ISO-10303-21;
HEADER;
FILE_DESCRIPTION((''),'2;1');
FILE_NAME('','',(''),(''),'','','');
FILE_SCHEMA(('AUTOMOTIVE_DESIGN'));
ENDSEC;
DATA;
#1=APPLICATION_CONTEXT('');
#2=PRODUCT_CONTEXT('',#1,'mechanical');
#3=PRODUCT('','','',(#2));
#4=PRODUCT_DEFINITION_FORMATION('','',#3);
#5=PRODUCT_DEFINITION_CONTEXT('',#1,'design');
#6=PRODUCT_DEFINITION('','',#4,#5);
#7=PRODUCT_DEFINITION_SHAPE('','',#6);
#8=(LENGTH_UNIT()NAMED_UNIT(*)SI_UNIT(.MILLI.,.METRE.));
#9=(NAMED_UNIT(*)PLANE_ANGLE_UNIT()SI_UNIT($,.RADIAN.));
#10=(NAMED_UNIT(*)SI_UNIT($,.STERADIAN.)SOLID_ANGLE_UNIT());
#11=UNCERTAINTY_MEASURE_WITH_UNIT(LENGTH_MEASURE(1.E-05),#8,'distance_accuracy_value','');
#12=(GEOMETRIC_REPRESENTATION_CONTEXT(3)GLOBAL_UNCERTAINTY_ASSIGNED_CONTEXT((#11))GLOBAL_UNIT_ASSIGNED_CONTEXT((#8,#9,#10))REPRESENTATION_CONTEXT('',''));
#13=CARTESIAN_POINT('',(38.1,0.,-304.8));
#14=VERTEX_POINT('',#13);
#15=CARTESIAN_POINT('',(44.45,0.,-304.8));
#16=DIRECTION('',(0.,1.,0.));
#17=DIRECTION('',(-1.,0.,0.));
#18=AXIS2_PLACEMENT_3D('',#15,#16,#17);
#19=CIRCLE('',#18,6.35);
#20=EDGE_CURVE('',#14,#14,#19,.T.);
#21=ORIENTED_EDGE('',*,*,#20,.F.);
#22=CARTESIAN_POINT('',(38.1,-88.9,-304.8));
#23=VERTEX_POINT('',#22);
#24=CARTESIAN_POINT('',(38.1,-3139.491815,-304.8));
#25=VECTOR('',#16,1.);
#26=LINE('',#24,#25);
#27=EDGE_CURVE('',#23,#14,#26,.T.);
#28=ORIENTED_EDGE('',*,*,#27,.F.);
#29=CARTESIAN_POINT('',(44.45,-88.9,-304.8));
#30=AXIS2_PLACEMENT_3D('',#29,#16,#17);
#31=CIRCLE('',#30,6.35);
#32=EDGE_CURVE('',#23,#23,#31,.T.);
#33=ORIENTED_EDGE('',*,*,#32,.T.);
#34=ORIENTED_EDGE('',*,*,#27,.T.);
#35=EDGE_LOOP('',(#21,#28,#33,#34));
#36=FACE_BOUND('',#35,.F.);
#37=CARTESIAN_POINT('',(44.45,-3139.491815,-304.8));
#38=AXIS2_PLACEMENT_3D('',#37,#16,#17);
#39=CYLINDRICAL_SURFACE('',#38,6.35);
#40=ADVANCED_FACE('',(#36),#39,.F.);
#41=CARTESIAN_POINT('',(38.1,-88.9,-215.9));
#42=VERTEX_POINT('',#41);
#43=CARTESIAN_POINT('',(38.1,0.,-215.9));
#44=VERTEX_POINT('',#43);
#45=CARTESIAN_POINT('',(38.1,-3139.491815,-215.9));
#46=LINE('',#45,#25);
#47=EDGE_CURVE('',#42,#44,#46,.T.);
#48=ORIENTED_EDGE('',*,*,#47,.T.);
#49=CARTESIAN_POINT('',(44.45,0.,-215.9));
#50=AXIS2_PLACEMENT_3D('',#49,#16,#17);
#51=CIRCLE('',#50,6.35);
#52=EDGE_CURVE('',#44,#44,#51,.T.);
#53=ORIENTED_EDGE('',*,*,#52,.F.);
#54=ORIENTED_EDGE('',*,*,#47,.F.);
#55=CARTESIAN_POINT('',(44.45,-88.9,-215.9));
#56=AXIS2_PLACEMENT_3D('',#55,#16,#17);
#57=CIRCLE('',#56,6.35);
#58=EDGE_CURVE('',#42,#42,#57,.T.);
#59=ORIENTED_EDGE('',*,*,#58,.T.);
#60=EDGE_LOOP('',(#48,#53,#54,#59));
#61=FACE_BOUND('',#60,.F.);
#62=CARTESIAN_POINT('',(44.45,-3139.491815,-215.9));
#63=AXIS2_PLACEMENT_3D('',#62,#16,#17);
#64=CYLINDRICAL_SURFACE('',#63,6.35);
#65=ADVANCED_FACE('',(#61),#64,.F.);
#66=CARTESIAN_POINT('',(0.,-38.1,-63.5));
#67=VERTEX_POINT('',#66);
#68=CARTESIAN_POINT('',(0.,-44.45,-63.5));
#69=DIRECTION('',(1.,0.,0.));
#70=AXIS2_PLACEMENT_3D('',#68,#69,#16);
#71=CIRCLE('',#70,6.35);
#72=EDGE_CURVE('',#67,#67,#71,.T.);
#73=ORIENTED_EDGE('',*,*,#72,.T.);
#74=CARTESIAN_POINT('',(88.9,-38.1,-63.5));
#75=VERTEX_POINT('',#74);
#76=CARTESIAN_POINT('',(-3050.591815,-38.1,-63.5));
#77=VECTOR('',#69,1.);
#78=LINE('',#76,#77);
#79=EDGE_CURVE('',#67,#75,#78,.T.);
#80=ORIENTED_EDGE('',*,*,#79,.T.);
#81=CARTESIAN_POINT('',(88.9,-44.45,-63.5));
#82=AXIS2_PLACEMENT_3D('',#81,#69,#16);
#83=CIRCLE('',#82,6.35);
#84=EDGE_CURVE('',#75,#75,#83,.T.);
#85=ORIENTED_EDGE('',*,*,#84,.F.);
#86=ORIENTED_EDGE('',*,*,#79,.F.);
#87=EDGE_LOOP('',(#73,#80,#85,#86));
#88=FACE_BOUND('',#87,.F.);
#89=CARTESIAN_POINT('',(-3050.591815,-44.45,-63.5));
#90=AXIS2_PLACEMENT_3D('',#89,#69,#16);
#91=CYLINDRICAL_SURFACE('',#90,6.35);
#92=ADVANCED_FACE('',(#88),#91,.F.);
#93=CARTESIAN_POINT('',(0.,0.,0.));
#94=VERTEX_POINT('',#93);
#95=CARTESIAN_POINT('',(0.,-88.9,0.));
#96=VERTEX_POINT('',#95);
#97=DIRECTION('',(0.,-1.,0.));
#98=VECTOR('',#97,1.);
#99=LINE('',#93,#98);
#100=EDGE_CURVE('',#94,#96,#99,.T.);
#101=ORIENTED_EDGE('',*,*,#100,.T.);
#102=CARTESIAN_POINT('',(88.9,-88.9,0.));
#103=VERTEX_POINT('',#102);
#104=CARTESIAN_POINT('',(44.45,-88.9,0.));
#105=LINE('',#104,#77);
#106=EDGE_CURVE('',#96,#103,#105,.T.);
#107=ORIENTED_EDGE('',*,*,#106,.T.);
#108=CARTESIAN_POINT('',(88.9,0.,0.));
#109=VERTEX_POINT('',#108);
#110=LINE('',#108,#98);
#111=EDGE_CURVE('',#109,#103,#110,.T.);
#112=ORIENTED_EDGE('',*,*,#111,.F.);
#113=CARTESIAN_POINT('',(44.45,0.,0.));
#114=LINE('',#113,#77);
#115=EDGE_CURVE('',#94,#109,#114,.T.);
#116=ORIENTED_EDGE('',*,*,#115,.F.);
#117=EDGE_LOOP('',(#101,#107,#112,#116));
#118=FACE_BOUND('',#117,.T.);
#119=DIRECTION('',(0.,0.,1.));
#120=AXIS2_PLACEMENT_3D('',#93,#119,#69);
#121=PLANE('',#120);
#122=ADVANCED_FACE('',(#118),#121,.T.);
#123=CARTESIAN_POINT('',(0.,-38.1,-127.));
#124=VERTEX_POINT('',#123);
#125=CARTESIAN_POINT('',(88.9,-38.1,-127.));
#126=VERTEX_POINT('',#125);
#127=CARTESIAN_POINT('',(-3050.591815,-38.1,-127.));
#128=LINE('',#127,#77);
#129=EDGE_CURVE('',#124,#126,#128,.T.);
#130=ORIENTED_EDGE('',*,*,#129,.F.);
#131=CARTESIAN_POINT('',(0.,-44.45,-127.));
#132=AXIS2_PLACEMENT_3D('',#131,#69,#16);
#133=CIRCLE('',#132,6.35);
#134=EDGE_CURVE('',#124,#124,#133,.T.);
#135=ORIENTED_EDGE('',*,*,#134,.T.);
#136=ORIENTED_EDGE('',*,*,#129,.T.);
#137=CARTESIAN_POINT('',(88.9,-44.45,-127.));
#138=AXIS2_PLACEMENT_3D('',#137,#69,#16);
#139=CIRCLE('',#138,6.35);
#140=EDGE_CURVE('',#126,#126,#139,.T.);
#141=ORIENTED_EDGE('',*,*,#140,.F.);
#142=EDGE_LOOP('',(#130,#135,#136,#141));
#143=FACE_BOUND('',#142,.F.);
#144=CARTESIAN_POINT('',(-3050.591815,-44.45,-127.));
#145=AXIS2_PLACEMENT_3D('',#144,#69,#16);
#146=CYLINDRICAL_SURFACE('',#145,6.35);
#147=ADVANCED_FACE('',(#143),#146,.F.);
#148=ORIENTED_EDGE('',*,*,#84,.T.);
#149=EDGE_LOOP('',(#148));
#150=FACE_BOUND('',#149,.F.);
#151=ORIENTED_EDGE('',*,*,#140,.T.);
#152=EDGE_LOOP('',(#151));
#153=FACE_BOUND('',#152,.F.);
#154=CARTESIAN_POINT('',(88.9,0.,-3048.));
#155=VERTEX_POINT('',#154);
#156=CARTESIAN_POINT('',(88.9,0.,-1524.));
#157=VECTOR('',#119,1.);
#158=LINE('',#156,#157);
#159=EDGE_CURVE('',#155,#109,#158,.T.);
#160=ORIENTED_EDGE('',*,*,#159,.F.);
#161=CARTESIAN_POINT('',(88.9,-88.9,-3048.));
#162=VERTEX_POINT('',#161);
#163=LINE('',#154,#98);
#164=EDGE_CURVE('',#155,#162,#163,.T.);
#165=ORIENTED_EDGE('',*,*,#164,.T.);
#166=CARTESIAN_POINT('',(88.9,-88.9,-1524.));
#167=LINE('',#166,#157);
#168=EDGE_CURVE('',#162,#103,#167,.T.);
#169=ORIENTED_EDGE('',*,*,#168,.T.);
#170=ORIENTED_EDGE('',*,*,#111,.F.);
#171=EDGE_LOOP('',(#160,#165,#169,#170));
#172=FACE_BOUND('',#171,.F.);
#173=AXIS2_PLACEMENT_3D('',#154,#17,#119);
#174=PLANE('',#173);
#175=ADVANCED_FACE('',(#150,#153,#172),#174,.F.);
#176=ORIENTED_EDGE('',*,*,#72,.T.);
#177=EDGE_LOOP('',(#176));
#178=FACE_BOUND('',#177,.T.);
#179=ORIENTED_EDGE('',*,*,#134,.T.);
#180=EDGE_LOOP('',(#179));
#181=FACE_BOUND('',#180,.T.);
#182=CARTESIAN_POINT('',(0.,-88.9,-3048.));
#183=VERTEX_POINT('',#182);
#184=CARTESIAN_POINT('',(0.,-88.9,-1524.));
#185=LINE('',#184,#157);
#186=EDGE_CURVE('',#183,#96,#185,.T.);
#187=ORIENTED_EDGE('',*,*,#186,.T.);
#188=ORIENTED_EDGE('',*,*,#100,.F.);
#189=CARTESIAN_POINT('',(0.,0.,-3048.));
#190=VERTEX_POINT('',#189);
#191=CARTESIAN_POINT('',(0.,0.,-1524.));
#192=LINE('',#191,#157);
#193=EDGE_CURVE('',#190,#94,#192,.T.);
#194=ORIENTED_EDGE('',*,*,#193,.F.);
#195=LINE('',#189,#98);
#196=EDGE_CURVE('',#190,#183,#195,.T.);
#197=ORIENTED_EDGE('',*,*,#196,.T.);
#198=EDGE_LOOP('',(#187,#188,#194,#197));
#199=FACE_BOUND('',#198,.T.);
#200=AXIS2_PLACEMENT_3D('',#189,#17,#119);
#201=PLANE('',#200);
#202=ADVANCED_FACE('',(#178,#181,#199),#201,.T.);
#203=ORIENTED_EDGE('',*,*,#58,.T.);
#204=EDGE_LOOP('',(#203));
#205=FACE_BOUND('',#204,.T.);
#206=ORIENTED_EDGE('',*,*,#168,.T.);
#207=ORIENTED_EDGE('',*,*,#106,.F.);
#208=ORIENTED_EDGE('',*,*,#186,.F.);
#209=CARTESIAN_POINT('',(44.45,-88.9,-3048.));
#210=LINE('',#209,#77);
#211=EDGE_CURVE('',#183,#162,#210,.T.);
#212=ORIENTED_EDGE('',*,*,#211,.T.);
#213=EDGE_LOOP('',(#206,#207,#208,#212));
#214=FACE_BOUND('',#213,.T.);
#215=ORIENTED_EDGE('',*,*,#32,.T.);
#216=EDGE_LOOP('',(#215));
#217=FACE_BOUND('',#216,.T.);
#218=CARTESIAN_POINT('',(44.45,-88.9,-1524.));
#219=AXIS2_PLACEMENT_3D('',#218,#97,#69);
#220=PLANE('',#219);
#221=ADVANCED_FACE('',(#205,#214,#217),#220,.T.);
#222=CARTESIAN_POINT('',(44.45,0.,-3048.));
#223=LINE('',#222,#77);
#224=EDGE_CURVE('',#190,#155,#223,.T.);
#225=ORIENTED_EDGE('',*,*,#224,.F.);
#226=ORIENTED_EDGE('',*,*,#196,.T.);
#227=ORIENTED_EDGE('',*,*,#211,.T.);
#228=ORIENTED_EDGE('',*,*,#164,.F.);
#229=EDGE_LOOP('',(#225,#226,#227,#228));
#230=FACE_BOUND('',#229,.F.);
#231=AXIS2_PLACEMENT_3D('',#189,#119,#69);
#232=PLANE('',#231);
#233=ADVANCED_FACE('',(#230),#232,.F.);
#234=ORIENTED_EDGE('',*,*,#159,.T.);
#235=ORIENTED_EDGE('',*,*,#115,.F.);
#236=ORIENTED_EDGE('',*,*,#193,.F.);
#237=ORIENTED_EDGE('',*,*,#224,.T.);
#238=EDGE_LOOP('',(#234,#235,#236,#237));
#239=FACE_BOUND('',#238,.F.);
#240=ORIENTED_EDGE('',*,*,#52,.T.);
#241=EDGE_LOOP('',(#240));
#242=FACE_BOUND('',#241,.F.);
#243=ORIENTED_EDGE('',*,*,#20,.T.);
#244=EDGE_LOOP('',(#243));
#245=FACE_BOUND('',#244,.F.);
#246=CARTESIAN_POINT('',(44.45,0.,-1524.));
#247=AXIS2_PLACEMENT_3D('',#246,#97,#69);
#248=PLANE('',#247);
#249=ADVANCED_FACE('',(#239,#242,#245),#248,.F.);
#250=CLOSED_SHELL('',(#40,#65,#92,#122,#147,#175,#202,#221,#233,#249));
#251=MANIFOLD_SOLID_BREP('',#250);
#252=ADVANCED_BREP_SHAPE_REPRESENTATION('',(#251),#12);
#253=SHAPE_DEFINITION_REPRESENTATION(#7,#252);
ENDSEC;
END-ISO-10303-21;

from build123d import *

# Parameters (mm, degrees)
F0_W     = 88.9
F0_H     = 3048
F1_DEPTH = 88.9
F3_D     = 12.7
F5_D     = 12.7


# Not quite as in the source:
# - a length typed as a fraction of an inch, garbled in the dataset ("3 / 203.2 mm" for 3/8 in), is restored


with BuildPart() as f1:
    # F0 (on Front) → F1 (new body)
    with BuildSketch(Plane.XZ):
        with Locations((44.45, -1524)):
            Rectangle(F0_W, F0_H)
    extrude(amount=F1_DEPTH)

    # F3 (through all)
    with Locations(Plane.XZ.offset(88.9)):
        with Locations((44.45, -215.9), (44.45, -304.8)):
            Hole(F3_D / 2)

    # F5 (through all)
    with Locations(Plane(origin=(0, 0, 0), x_dir=(0, -1, 0), z_dir=(-1, 0, 0))):
        with Locations((44.45, -63.5), (44.45, -127)):
            Hole(F5_D / 2)


solid = f1.part
